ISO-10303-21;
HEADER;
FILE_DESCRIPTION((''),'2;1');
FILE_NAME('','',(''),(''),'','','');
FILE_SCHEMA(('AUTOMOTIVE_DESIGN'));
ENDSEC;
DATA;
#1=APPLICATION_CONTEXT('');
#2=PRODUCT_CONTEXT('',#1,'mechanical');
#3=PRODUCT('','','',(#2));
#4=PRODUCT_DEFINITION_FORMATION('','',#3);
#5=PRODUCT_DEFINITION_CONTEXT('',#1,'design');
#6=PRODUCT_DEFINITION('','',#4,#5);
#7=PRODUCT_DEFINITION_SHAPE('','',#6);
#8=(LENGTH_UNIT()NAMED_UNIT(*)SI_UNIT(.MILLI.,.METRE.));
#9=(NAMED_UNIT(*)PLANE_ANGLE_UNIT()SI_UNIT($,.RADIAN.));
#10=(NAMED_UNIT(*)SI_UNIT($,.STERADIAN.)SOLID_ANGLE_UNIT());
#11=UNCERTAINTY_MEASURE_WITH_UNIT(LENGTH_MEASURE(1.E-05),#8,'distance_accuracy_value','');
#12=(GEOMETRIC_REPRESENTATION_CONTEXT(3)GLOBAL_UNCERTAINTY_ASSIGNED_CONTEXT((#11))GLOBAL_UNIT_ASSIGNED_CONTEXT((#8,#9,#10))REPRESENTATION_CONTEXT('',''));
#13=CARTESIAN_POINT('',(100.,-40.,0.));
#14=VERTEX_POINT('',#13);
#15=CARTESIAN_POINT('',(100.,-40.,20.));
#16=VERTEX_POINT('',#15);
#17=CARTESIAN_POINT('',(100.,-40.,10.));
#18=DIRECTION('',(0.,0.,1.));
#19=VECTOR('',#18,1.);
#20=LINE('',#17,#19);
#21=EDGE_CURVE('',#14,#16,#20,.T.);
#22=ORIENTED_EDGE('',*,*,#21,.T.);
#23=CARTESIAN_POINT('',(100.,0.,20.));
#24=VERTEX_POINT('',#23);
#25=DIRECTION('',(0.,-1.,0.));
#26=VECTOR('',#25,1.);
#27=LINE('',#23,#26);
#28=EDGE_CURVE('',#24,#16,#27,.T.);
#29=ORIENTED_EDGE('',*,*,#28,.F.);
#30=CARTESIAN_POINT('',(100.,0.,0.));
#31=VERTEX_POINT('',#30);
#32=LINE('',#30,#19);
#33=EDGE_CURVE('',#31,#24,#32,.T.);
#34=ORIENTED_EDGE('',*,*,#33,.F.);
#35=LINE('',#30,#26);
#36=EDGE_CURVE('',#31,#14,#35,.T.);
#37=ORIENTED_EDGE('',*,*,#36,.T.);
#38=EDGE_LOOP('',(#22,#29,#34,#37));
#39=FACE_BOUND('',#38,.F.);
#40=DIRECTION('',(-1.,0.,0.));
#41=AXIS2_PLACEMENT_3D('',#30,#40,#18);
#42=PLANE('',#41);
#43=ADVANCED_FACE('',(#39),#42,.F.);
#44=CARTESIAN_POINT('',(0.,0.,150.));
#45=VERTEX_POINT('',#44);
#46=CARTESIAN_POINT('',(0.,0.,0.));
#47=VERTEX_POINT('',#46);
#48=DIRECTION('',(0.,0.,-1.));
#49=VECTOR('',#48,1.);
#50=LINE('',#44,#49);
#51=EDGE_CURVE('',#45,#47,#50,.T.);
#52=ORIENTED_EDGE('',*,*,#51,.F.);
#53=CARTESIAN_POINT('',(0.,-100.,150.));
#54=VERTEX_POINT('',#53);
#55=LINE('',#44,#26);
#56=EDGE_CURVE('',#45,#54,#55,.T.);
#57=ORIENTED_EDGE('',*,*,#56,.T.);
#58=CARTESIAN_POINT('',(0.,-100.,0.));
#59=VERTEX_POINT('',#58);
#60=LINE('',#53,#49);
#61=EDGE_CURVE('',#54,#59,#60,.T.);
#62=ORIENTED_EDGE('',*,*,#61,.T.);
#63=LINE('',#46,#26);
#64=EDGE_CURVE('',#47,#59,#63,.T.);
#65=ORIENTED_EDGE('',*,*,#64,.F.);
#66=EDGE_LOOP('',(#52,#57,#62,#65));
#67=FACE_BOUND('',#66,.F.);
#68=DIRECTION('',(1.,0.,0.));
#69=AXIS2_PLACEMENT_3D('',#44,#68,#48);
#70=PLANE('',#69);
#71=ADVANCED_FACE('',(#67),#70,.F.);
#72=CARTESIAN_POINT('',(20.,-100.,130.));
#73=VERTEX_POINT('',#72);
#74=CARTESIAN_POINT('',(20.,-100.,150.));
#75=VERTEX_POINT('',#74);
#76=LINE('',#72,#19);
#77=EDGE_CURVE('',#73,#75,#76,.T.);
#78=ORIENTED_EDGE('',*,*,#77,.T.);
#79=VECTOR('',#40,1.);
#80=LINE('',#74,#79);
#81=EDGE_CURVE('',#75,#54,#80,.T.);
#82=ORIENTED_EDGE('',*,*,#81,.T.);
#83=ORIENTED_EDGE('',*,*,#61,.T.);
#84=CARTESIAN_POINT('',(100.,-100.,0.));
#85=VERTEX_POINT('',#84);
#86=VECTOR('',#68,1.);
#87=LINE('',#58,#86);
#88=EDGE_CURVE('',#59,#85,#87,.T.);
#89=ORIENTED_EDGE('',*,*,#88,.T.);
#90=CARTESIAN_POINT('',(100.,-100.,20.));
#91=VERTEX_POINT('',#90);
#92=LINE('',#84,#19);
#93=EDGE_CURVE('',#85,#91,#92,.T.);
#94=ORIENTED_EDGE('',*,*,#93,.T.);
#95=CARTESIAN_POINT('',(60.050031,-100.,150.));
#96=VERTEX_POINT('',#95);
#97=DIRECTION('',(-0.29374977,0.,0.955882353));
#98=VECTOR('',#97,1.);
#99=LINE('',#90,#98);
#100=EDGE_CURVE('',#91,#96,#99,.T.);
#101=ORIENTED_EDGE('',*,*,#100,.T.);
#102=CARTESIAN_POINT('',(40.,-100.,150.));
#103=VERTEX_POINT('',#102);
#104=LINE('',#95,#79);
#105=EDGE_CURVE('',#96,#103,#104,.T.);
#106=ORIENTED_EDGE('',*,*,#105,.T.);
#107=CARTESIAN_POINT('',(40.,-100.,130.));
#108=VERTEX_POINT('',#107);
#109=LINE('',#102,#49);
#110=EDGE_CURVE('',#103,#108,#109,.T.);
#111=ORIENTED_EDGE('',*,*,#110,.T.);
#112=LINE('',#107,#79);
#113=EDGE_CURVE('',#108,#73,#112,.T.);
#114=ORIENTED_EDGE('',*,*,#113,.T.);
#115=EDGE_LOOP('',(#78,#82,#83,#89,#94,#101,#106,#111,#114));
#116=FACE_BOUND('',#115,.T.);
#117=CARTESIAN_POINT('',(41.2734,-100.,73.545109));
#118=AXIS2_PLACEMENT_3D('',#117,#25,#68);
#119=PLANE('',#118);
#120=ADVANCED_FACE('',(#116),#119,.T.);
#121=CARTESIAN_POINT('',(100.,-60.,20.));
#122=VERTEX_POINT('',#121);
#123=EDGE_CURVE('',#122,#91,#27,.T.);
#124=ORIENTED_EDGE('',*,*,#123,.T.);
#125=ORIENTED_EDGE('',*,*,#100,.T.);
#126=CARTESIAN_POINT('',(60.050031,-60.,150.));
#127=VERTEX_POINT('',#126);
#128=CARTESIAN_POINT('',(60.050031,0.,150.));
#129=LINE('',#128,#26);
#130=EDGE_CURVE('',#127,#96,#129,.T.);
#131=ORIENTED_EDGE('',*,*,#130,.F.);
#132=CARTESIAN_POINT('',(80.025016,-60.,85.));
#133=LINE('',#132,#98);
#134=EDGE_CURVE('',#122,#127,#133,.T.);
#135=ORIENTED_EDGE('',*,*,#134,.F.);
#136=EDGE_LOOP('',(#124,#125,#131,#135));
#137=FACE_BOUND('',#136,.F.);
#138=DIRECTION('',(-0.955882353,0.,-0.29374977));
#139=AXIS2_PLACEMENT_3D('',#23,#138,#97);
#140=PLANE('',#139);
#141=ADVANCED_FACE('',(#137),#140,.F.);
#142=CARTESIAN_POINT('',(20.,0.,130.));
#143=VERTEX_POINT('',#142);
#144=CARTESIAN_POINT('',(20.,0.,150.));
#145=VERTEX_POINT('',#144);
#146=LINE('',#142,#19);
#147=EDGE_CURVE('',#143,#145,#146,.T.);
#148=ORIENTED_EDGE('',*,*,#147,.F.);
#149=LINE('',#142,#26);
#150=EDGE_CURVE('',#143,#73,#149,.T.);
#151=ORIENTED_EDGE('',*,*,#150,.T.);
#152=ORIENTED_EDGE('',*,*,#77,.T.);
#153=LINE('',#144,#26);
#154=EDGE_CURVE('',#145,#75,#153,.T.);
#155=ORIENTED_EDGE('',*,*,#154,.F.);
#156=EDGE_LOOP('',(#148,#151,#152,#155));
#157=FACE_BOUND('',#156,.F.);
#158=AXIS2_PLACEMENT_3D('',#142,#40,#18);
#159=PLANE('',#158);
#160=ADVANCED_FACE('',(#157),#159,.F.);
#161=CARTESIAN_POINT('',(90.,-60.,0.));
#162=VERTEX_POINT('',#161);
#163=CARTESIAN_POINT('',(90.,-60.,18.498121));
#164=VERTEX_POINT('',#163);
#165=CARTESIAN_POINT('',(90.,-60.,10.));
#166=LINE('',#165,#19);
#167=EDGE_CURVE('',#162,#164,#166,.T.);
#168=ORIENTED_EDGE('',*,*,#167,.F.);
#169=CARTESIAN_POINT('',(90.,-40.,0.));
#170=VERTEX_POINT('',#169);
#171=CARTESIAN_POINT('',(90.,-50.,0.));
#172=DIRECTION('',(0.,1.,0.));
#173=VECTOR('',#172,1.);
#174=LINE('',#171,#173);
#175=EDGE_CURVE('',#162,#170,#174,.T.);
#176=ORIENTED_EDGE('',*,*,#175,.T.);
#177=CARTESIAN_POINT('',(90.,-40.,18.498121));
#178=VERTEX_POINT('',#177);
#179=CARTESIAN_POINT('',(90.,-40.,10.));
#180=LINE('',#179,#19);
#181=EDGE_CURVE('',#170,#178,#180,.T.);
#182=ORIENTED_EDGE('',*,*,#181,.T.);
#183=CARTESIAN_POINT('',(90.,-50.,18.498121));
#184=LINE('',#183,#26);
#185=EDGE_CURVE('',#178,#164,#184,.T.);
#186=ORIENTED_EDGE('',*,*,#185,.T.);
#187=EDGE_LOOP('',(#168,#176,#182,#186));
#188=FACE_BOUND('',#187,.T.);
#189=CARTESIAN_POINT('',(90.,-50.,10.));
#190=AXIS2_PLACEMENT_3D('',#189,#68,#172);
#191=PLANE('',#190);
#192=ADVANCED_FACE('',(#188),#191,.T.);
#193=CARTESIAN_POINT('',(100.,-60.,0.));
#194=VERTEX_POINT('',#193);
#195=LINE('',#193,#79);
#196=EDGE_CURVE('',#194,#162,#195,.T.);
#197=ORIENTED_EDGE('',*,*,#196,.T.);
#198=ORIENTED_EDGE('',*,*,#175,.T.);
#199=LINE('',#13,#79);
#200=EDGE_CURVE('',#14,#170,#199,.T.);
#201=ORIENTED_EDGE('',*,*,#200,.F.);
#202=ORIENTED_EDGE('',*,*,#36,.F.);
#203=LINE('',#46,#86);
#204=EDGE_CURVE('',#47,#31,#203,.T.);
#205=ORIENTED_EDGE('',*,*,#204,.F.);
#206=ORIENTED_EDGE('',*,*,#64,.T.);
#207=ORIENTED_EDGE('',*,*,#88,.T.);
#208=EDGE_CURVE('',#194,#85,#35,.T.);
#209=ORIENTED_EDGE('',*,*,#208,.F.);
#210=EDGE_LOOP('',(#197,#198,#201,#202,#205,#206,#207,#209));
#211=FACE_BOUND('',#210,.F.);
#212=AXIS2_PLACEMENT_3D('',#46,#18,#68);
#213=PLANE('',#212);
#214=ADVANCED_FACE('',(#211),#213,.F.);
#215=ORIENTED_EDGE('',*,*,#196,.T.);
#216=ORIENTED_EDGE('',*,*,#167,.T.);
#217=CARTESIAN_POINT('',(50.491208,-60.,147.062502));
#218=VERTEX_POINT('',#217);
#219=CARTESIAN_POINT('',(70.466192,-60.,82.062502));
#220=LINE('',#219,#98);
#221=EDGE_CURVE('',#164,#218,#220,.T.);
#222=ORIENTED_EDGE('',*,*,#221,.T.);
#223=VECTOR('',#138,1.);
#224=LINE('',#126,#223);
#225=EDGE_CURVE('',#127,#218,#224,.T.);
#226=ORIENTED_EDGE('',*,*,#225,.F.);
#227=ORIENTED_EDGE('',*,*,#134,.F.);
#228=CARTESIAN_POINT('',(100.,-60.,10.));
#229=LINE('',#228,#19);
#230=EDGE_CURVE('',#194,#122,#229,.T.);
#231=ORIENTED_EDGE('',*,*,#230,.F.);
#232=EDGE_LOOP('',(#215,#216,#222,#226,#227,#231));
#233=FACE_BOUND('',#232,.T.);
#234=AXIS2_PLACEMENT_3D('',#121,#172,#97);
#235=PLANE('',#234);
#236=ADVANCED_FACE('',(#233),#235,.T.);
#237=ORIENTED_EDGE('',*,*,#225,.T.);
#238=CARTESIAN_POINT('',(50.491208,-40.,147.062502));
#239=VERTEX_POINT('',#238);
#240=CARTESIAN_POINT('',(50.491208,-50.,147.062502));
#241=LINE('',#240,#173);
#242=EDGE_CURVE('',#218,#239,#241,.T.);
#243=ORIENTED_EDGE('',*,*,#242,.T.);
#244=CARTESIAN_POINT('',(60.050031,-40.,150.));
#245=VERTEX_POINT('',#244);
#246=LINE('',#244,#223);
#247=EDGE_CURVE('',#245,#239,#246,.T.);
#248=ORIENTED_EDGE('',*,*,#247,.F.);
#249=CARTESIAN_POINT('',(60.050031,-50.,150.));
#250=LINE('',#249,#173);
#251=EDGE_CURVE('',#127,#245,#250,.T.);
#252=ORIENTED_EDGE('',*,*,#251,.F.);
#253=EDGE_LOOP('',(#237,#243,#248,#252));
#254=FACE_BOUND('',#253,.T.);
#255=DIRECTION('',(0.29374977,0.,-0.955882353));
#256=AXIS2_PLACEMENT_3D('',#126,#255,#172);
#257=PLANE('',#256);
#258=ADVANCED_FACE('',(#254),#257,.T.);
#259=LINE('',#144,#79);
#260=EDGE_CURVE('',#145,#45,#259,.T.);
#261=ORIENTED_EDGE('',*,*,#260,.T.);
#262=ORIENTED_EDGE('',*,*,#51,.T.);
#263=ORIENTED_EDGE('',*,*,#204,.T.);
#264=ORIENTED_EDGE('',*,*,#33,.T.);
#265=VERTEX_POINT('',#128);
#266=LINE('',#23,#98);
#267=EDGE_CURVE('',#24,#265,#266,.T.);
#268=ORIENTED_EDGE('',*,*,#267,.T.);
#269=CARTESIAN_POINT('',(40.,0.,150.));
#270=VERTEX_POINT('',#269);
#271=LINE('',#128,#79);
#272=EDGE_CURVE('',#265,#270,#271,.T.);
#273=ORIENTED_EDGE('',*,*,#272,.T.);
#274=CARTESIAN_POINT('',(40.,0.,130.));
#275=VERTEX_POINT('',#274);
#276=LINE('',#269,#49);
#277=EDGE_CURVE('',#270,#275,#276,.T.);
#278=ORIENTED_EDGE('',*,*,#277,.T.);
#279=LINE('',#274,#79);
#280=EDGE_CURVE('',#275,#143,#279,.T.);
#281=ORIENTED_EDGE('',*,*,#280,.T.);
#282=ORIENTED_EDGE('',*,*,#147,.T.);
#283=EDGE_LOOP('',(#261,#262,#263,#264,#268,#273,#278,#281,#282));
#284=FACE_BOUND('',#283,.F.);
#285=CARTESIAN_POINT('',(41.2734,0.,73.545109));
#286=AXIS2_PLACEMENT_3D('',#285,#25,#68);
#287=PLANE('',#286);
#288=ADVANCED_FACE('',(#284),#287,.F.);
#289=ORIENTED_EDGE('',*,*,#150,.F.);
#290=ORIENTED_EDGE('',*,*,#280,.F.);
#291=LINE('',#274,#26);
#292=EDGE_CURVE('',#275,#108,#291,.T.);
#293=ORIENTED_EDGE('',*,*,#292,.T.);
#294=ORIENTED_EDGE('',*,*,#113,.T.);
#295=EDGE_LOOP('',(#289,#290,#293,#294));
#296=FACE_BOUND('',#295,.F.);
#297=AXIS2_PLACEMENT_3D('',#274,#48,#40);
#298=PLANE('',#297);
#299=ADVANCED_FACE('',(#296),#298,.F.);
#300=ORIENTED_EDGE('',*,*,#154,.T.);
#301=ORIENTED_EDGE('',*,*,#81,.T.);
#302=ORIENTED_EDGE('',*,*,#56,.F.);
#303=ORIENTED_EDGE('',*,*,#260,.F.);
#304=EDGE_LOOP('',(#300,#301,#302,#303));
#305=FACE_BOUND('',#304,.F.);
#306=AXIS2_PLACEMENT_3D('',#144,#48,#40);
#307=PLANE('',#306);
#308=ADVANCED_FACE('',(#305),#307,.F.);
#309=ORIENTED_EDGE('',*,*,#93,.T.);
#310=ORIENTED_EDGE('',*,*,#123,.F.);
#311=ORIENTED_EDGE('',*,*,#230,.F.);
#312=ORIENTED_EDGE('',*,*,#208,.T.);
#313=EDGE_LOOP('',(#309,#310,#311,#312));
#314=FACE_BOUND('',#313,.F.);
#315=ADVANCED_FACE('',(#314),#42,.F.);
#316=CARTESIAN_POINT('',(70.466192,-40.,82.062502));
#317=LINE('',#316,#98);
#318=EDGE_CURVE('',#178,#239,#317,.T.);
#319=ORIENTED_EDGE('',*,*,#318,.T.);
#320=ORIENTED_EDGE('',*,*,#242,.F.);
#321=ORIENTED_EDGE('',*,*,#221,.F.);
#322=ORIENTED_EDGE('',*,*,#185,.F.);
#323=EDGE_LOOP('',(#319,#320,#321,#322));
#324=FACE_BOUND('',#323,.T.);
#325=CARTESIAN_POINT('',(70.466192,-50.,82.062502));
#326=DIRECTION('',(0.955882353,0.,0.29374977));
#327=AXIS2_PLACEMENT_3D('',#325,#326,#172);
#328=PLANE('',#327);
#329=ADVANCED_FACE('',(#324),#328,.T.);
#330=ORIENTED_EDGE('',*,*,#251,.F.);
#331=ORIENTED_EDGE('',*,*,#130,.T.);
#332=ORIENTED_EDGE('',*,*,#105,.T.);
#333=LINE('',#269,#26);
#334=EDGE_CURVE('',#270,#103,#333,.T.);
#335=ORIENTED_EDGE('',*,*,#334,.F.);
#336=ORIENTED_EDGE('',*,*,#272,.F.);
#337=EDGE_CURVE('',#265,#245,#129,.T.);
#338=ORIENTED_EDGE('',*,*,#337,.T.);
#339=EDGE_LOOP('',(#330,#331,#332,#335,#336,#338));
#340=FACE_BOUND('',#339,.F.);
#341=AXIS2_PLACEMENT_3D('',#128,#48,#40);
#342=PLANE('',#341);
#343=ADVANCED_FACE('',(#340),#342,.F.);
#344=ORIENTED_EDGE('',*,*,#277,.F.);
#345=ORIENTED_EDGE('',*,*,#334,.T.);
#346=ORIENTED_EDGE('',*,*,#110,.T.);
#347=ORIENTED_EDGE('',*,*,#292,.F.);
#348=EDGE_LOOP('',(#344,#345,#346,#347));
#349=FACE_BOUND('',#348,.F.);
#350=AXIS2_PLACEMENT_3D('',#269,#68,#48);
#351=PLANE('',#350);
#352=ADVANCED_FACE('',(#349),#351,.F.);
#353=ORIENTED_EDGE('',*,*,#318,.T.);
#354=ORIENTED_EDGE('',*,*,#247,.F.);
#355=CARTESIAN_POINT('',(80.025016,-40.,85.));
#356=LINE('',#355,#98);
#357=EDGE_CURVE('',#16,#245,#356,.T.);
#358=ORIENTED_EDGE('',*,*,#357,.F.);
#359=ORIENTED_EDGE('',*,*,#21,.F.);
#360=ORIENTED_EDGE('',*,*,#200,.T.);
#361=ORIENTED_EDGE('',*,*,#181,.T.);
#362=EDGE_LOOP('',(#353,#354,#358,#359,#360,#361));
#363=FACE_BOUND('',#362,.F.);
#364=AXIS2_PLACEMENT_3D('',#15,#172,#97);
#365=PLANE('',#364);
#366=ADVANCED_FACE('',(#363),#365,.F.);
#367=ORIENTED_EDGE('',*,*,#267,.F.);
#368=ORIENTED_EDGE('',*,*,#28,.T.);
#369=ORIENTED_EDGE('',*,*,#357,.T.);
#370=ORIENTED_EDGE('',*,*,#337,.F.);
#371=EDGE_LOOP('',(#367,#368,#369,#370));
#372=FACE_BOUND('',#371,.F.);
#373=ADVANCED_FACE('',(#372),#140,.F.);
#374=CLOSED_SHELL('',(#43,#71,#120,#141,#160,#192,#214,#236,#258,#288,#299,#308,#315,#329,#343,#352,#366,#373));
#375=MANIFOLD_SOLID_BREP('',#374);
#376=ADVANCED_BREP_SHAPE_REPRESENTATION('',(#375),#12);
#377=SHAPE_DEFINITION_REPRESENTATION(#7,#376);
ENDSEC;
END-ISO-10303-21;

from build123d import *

# Parameters (mm, degrees)
F1_DEPTH = 100
F3_W     = 20
F3_H     = 20
F4_DEPTH = 10
F2_W     = 20
F2_H     = 136
F5_DEPTH = 10
F6_DEPTH = 10
F7_W     = 20
F7_H     = 136
F8_DEPTH = 10


with BuildPart() as f1:
    # F0 (on Front) → F1 (new body)
    with BuildSketch(Plane.XZ):
        Polygon((0, 150), (0, 0), (100, 0), (100, 20), (60.0500312891, 150), (40, 150), (40, 130), (20, 130), (20, 150), align=None)
    extrude(amount=F1_DEPTH)

    # F3 (on face) → F4 (cut)
    with BuildSketch(Plane.YZ.offset(100)):
        with Locations((-50, 10)):
            Rectangle(F3_W, F3_H)
    extrude(amount=-F4_DEPTH, mode=Mode.SUBTRACT)

    # F2 (on face) → F5 (join)
    with BuildSketch(Plane(origin=(96.9869116916, 0, 29.8048006727), x_dir=(0, 1, 0), z_dir=(0.9558823529, 0, 0.2937497699))):
        with Locations((-50, 57.7426700655)):
            Rectangle(F2_W, F2_H)
    extrude(amount=F5_DEPTH)

    # F6 (cut): a face of the model
    f6_faces = [f1.faces().sort_by_distance(p)[0] for p in [
        (89.583839174, -50, 87.9374976993),
    ]]
    extrude(f6_faces, amount=-F6_DEPTH, mode=Mode.SUBTRACT)

    # F7 (on face) → F8 (cut)
    with BuildSketch(Plane(origin=(96.9869116916, 0, 29.8048006727), x_dir=(0, 1, 0), z_dir=(0.9558823529, 0, 0.2937497699))):
        with Locations((-50, 57.7426700655)):
            Rectangle(F7_W, F7_H)
    extrude(amount=-F8_DEPTH, mode=Mode.SUBTRACT)


solid = f1.part
